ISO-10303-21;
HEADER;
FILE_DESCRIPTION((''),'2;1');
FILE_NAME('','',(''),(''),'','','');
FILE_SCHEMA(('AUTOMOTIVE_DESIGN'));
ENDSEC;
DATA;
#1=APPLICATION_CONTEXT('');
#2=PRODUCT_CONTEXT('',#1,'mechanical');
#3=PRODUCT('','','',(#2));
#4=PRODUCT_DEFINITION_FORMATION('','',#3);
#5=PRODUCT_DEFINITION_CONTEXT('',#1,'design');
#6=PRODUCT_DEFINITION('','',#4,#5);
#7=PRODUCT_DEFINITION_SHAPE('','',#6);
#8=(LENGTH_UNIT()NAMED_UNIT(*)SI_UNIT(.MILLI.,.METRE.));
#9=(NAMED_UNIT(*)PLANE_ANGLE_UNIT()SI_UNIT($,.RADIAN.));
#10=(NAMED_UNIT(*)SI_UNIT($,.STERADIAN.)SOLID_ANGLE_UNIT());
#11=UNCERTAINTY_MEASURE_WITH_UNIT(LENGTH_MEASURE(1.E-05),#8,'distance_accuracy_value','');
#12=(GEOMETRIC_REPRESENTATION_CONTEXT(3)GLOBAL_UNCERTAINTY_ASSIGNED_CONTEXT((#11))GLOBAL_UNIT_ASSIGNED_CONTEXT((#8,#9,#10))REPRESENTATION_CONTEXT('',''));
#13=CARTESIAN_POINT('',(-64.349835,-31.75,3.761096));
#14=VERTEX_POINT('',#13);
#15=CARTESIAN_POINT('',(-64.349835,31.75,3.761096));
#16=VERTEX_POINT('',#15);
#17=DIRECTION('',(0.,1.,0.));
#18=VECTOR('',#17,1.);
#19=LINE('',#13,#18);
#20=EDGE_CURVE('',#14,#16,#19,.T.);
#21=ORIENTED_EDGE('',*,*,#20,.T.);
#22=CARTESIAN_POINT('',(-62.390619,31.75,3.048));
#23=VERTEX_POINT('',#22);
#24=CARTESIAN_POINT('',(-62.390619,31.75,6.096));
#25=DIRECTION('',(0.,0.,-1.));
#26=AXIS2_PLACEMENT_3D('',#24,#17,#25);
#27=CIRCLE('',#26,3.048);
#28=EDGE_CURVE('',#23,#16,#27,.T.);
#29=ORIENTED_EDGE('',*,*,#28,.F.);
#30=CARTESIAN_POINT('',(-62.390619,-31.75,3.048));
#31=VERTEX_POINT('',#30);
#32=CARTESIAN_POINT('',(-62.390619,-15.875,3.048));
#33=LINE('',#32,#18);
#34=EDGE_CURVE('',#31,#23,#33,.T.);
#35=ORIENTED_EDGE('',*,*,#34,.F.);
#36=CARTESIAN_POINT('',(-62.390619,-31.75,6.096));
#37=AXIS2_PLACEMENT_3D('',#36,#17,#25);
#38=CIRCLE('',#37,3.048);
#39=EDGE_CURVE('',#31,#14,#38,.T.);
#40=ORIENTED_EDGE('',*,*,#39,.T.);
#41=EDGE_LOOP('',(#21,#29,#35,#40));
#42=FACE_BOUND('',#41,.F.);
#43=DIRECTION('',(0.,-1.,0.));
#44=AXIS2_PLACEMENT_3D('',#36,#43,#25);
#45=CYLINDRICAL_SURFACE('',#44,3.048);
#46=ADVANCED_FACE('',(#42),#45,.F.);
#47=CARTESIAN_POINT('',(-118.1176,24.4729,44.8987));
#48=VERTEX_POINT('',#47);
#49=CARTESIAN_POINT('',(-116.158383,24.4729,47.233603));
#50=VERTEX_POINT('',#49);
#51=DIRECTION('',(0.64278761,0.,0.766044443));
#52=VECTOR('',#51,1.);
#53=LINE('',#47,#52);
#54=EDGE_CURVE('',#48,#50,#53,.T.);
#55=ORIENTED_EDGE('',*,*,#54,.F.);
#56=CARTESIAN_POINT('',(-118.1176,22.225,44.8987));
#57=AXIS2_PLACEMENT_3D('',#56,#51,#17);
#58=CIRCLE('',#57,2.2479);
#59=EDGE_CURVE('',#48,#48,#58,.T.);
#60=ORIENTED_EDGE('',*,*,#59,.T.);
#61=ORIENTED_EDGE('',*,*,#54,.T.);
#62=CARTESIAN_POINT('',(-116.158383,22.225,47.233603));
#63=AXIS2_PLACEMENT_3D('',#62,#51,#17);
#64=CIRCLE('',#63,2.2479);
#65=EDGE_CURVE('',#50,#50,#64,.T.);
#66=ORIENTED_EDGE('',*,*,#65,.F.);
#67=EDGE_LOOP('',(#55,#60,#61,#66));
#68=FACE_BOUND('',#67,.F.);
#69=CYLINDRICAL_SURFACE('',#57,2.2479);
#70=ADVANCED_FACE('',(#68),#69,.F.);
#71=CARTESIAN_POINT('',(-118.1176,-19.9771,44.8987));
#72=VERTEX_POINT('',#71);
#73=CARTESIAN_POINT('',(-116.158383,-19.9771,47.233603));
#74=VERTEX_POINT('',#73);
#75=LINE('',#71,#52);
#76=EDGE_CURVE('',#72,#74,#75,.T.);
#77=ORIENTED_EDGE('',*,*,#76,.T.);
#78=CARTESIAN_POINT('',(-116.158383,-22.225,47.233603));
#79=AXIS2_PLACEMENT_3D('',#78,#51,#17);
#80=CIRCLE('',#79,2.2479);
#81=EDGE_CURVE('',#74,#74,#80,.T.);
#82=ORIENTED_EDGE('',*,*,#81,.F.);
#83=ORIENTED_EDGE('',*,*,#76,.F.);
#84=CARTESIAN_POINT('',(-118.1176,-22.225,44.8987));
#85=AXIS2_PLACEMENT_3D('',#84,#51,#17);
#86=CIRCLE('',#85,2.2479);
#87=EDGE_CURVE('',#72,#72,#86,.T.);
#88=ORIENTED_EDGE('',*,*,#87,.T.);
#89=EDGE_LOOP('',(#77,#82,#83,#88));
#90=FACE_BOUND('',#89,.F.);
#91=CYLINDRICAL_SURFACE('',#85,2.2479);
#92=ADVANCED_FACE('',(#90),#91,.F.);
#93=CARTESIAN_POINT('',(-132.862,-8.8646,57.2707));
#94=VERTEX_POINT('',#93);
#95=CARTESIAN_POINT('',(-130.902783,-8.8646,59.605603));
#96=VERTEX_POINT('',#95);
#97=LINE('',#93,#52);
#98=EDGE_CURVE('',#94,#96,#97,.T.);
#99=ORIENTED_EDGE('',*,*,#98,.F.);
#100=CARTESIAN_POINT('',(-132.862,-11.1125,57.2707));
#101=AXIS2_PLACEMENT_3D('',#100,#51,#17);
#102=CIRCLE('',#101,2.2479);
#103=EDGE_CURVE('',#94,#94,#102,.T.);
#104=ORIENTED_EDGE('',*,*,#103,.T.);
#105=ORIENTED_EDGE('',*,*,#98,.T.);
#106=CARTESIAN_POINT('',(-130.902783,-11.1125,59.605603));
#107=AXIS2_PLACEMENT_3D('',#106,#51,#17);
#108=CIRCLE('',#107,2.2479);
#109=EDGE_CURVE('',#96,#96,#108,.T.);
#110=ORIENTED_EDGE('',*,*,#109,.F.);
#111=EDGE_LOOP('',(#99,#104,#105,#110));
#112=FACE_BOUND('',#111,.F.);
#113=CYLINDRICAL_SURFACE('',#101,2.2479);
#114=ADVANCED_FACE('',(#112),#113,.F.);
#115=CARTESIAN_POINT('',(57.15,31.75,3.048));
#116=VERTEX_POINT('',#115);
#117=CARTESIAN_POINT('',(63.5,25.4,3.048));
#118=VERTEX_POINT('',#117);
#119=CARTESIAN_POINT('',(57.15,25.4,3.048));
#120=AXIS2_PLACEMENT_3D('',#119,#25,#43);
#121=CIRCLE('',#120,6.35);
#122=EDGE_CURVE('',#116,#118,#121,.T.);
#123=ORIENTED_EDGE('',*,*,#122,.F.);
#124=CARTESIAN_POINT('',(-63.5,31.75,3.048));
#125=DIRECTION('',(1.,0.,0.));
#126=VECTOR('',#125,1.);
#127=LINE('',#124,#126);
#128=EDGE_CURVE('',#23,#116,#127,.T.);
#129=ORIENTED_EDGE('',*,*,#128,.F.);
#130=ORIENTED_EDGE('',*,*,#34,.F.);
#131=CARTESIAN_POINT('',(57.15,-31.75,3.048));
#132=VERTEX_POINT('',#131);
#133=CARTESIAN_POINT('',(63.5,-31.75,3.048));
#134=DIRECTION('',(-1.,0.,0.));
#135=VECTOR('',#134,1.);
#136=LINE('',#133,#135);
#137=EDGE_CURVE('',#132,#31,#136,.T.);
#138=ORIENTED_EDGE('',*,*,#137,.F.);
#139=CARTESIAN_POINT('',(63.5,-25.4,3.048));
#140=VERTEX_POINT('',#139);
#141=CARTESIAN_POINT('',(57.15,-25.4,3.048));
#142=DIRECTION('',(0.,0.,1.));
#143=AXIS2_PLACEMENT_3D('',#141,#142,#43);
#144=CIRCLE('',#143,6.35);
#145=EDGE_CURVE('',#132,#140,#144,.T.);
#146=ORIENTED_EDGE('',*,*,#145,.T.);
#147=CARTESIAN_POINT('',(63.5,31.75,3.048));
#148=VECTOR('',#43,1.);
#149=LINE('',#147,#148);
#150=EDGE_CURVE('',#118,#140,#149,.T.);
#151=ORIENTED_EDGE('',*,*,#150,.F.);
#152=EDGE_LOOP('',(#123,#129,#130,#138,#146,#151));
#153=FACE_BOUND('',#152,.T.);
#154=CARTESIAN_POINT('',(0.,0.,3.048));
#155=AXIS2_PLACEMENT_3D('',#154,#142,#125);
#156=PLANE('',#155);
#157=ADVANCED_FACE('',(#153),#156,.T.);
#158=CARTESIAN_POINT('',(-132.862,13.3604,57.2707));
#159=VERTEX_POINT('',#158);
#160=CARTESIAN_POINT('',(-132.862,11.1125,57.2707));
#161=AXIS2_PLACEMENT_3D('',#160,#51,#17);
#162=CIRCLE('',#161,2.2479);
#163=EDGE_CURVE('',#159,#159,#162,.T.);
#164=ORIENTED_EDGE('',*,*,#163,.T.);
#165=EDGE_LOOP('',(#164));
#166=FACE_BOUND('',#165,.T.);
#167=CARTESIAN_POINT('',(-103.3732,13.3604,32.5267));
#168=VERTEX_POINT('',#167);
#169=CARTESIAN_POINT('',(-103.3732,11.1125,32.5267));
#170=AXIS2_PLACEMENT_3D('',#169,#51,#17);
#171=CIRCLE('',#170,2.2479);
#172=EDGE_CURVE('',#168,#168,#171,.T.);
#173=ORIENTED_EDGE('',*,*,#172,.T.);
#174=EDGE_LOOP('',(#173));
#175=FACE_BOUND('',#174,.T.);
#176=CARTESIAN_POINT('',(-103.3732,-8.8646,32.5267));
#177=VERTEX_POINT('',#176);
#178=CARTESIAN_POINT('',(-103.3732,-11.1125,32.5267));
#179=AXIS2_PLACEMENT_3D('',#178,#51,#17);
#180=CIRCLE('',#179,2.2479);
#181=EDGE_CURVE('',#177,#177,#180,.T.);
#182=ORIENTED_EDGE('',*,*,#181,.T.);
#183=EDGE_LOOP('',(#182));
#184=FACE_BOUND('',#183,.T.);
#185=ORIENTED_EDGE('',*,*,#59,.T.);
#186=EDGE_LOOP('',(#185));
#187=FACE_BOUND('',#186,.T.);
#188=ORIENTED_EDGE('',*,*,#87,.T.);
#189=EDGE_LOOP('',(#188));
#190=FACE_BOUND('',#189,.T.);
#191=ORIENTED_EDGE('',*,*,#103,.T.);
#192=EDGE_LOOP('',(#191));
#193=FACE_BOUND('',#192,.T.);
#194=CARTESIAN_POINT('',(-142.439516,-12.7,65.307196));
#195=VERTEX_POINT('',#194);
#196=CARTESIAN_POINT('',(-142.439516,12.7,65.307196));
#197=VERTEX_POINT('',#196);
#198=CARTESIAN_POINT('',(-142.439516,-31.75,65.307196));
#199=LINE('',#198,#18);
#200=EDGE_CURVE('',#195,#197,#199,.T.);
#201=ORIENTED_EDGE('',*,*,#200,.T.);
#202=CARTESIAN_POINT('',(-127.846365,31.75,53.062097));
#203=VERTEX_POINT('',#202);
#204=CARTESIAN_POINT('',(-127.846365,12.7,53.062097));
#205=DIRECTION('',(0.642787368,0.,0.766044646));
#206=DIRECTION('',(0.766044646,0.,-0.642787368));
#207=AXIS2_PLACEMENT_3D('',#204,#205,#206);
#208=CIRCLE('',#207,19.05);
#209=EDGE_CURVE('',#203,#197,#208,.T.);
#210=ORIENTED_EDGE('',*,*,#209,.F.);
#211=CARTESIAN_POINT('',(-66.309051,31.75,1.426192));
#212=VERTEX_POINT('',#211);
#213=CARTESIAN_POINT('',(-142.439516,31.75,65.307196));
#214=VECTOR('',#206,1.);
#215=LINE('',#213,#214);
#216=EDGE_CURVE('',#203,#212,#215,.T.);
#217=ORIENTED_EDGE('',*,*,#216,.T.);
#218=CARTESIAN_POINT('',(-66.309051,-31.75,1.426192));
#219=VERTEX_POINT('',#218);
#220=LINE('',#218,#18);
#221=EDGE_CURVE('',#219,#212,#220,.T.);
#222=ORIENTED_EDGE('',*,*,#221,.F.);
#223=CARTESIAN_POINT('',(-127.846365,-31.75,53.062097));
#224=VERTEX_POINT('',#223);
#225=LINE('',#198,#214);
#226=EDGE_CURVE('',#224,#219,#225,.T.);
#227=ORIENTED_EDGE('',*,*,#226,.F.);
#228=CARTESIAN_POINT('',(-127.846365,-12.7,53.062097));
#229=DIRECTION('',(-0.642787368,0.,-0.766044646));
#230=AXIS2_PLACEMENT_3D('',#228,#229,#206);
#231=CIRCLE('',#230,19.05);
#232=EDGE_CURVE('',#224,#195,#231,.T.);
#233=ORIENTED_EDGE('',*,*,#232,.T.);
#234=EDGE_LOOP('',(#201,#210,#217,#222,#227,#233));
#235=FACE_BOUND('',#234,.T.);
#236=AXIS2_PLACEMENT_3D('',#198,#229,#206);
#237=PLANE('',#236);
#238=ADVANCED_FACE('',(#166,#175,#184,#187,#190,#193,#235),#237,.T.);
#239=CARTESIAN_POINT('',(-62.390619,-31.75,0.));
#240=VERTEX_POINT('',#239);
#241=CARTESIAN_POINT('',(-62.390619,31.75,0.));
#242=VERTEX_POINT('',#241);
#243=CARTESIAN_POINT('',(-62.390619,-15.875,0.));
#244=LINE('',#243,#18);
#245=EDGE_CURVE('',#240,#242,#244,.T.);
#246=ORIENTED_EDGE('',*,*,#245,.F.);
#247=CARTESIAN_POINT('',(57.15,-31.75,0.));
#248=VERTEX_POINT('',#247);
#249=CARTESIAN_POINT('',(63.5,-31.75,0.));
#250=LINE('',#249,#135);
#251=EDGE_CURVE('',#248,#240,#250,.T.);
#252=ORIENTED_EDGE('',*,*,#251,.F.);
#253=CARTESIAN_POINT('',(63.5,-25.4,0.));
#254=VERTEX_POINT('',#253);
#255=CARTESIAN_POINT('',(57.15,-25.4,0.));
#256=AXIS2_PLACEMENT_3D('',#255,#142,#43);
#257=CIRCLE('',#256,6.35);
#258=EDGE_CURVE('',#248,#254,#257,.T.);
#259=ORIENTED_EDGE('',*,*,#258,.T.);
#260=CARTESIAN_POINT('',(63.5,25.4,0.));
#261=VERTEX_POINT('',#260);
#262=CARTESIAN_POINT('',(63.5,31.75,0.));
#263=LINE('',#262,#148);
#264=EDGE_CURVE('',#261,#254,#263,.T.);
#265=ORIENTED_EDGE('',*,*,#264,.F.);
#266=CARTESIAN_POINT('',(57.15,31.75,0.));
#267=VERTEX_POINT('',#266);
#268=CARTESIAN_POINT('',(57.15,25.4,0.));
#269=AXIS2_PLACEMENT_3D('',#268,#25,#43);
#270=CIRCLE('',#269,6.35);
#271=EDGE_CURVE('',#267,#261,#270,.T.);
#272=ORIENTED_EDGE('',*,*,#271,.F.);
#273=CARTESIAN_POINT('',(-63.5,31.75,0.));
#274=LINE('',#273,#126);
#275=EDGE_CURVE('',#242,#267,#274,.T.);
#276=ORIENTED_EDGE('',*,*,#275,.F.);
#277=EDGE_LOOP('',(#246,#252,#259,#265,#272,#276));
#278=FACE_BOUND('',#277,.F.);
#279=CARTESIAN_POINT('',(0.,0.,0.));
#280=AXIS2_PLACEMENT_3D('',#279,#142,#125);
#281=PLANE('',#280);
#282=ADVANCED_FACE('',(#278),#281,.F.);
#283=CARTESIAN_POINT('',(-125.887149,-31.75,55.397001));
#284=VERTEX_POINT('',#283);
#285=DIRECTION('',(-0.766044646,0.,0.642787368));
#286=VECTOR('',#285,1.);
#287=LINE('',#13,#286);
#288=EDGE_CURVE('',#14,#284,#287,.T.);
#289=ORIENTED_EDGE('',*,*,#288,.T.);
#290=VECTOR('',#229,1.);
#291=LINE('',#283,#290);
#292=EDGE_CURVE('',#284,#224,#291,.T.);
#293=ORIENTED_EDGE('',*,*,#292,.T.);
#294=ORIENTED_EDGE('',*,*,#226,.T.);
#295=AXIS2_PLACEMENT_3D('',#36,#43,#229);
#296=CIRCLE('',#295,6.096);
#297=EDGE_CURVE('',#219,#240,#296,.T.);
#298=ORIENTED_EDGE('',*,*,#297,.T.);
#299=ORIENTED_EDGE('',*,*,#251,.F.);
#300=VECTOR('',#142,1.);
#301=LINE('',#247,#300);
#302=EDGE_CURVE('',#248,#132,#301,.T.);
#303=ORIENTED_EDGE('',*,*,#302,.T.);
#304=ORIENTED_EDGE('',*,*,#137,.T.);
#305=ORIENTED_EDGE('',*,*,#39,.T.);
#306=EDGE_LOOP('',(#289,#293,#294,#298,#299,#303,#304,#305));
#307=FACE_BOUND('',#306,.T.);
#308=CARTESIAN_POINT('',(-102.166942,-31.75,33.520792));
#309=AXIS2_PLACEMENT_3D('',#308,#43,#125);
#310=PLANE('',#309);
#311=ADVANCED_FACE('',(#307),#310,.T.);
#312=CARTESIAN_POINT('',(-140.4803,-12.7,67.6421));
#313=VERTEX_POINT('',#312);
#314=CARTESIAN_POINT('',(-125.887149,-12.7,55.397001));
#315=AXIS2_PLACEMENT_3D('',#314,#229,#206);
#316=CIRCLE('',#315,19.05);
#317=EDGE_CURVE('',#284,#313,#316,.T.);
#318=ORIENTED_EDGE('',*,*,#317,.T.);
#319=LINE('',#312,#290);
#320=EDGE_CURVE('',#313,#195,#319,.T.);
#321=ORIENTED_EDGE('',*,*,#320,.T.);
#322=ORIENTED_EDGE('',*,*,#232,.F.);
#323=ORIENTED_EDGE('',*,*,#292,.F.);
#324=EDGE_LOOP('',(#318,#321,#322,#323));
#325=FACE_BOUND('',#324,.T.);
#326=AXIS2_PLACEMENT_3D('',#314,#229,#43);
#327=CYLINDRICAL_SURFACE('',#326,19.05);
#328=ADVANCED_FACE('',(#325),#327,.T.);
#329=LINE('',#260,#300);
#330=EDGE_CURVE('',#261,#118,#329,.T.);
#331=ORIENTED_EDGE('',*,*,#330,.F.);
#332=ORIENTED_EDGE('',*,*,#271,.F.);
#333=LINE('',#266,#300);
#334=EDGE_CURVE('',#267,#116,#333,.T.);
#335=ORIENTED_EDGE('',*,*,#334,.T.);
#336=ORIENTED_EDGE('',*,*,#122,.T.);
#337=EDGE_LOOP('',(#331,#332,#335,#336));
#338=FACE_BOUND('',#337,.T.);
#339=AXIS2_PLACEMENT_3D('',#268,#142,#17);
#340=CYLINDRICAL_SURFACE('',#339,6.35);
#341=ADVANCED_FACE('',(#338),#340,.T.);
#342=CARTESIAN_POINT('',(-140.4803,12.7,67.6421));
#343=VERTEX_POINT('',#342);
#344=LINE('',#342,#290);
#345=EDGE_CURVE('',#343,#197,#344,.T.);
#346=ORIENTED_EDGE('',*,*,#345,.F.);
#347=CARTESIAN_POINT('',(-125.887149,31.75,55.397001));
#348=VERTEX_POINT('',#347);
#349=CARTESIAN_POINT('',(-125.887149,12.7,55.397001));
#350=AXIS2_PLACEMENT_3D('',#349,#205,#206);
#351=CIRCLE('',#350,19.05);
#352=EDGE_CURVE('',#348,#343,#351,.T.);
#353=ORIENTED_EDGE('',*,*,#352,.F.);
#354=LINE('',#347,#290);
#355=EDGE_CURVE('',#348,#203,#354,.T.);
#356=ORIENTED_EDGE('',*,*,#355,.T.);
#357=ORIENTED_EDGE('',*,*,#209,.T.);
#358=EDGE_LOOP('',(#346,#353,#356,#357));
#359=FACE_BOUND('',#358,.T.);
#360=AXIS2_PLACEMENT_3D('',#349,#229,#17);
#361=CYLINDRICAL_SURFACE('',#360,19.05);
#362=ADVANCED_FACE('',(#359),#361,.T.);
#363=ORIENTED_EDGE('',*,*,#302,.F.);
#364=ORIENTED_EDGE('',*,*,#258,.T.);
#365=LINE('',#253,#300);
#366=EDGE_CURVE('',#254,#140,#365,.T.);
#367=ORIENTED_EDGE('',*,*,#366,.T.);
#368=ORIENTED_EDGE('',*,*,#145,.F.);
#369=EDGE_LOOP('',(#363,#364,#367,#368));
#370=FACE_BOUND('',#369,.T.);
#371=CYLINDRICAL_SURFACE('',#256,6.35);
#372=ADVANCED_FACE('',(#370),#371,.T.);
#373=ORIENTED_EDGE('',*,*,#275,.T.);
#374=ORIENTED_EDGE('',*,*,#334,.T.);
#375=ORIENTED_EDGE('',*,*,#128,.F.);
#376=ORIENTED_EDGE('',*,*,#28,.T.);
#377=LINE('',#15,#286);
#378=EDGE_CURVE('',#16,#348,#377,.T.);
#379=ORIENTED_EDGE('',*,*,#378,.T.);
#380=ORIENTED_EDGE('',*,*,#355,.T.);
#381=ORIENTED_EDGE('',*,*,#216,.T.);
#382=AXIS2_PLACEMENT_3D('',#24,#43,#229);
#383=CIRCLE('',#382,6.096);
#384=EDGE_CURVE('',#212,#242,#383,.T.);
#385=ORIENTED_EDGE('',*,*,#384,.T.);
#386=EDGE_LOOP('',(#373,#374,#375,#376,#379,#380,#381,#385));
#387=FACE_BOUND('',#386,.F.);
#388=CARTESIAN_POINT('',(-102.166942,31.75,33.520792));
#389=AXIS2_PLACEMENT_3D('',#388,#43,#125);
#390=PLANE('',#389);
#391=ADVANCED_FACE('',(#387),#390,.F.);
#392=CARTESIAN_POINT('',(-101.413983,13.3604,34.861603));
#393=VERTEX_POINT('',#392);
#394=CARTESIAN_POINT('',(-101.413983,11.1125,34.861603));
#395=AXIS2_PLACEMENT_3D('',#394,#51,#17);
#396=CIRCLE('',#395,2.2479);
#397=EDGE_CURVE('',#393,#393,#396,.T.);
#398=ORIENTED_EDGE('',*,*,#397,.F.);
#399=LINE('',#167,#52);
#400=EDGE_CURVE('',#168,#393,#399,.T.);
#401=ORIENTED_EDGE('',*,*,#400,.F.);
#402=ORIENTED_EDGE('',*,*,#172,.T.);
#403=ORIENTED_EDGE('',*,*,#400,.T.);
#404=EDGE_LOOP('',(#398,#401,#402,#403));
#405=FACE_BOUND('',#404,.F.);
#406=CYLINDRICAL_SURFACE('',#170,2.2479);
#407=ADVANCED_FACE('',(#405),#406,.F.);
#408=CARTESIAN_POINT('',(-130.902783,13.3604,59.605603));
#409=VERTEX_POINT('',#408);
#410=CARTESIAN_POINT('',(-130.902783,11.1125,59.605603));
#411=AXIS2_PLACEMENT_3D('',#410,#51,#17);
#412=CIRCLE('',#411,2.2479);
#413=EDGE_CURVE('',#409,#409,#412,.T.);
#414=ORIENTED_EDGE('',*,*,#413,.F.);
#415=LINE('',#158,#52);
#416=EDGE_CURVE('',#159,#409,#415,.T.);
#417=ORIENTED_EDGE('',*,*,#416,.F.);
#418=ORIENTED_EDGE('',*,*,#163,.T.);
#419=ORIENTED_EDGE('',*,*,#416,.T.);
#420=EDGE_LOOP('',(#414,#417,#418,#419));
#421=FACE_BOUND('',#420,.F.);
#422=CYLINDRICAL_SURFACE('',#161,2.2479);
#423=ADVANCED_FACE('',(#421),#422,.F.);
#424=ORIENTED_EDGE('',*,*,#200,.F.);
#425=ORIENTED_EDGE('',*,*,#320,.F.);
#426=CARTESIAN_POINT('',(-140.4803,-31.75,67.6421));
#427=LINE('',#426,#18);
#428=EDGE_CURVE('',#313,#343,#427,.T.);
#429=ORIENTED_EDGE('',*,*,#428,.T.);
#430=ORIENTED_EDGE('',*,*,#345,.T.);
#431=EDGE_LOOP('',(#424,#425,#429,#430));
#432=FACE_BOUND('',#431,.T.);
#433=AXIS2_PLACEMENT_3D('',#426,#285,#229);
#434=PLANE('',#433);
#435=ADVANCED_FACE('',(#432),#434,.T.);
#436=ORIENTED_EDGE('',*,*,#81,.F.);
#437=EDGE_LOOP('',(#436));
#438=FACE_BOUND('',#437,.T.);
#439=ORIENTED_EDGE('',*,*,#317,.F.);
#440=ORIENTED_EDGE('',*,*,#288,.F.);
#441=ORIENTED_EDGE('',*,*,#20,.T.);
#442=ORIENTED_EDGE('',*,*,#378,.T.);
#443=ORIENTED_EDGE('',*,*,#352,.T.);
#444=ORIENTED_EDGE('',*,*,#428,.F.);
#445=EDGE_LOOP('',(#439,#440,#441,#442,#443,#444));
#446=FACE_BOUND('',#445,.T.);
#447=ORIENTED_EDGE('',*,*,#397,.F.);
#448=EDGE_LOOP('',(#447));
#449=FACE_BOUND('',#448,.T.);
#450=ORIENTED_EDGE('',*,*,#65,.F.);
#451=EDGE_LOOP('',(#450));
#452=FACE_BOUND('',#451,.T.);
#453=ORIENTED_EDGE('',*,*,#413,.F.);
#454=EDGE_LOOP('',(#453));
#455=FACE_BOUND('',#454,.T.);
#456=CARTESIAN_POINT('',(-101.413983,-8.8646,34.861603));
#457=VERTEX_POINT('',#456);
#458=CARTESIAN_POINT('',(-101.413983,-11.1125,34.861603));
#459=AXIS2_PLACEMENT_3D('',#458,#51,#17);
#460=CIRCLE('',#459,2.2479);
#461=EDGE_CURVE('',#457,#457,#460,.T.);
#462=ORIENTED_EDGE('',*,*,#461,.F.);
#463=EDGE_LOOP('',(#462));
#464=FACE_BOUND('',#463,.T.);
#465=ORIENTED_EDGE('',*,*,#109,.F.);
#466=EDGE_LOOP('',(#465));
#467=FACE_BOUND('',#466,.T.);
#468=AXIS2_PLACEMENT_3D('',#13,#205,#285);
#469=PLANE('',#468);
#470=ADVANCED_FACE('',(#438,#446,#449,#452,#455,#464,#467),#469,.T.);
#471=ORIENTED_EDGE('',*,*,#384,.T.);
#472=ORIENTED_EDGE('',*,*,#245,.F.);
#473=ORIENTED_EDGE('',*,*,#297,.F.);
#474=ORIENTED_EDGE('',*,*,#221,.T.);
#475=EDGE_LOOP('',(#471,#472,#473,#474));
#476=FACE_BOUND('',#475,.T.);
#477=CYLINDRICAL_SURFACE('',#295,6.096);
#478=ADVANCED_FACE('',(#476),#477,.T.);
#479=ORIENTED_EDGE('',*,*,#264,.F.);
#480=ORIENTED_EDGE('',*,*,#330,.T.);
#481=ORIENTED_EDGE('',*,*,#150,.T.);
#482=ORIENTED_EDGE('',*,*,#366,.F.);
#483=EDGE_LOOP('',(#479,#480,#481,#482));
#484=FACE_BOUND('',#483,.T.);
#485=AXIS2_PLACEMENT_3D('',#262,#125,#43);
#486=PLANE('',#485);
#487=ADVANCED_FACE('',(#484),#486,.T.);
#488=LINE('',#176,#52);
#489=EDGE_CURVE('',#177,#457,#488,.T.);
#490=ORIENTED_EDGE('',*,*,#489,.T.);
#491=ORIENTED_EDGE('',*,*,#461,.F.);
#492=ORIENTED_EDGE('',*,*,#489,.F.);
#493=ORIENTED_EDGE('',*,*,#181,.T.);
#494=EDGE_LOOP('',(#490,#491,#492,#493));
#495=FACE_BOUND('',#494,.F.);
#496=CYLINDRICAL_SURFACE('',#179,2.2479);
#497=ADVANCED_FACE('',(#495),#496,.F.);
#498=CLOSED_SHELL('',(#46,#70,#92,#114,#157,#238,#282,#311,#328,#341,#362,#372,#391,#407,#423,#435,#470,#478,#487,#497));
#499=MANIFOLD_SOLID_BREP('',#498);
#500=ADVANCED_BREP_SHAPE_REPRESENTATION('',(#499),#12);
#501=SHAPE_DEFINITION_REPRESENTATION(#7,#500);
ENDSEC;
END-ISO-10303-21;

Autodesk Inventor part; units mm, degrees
ref_plane "YZ Plane" through (0, 0, 0) normal (1, 0, 0) x (0, 1, 0)
ref_plane "XZ Plane" through (0, 0, 0) normal (0, 1, 0) x (-1, 0, 0)
ref_plane "XY Plane" through (0, 0, 0) normal (0, 0, 1) x (1, 0, 0)
sketch "Sketch1" plane through (0, 0, 0) normal (0, 0, 1) x (1, 0, 0)
  line L0 (63.5, -31.75) -> (-63.5, -31.75)
  line L1 (-63.5, -31.75) -> (-63.5, 31.75)
  line L2 (-63.5, 31.75) -> (63.5, 31.75)
  line L3 (63.5, 31.75) -> (63.5, -31.75)
  line L4 (63.5, -31.75) -> (-63.5, 31.75) construction
  line L5 (-63.5, -31.75) -> (63.5, 31.75) construction
  point P0 (0, 0)
  dimension "d0" = 63.5
  dimension "d1" = 127
extrude "Plate1" add sketch "Sketch1" along normal blind 3.048
sketch "Sketch2" plane through (-63.5, -31.75, 3.048) normal (-0.6427876, 0, -0.7660444) x (0, -1, 0)
  line L0 (-63.5, 0) -> (0, 0)
  line L1 (0, 0) -> (0, 100.4906)
  line L2 (0, 100.4906) -> (-63.5, 100.4906)
  line L3 (-63.5, 100.4906) -> (-63.5, 0)
edge flange "Flange1" height 101.6 angle 40 thickness 3.048 bend radius 3.048 thickness toward (-0.6427876, 0, -0.7660444) relief tear relief width 3.048 relief depth 1.524 edges at (-63.5, 0, 3.048) wall of the first edge with corners at (-63.5, 31.75, 3.048) (-63.5, -31.75, 3.048) (-140.4803, -31.75, 67.6421) (-140.4803, 31.75, 67.6421)
bend "Bend1"
corner "Corner1"
sketch "Sketch3" plane through (-142.4395, -31.75, 65.3072) normal (-0.6427876, 0, -0.7660444) x (-0.7660444, 0, 0.6427876)
  circle A0 centre (-31.75, 31.75) radius 22.225 construction
  line L0 (-99.3812, 63.5) -> (0, 63.5) construction
  line L1 (0, 63.5) -> (0, 0) construction
  point P0 (-151.0937, 31.75)
  point P1 (-49.6906, 63.5)
  point P2 (-31.75, 53.975)
  point P3 (-50.9974, 42.8625)
  point P4 (-50.9974, 20.6375)
  point P5 (-31.75, 9.525)
  point P6 (-12.5026, 20.6375)
  point P7 (-12.5026, 42.8625)
  dimension "d13" = 44.45
  dimension "d16" = 360
  dimension "d25" = 31.75
hole "Hole1" at (-118.1176, 22.225, 44.8987) at (-103.3732, 11.1125, 32.5267) at (-103.3732, -11.1125, 32.5267) at (-118.1176, -22.225, 44.8987) at (-132.862, -11.1125, 57.2707) at (-132.862, 11.1125, 57.2707) direction (0.6427876, 0, 0.7660444) diameter 4.4958 depth 3.048 tip angle 118 clearance for "Flat Head Machine Screw (82)" size "#8" standard "Ansi Unified Screw Threads"
fillet "Fillet1" radius 19.05 2 edges at (-141.4599, -31.75, 66.4747) (-141.4599, 31.75, 66.4747)
fillet "Fillet2" radius 6.35 2 edges at (63.5, 31.75, 1.524) (63.5, -31.75, 1.524)
equation "\"d23\" = Thickness"
equation "\"d2\" = Thickness"
equation "\"d3\" = BendReliefWidth"
equation "\"d4\" = BendReliefDepth"
equation "\"d5\" = MinimumRemnant"
equation "\"d6\" = TransitionRadius"
equation "\"d9\" = BendRadius"
equation "\"d10\" = CornerReliefSize"
equation "\"d11\" = GapSize"
equation "\"d12\" = JacobiRadiusSize"
equation "\"BendRadius\" = Thickness"
equation "\"BendReliefWidth\" = Thickness"
equation "\"BendReliefDepth\" = 0.5 * Thickness"
equation "\"CornerReliefSize\" = 4 * Thickness"
equation "\"MinimumRemnant\" = 2 * Thickness"
equation "\"TransitionRadius\" = BendRadius"
equation "\"JacobiRadiusSize\" = BendRadius"
equation "\"GapSize\" = Thickness"
equation "\"Thickness\" = 3.048"
properties part number "CL7-023" material "Polycarbonate, Smoke"
